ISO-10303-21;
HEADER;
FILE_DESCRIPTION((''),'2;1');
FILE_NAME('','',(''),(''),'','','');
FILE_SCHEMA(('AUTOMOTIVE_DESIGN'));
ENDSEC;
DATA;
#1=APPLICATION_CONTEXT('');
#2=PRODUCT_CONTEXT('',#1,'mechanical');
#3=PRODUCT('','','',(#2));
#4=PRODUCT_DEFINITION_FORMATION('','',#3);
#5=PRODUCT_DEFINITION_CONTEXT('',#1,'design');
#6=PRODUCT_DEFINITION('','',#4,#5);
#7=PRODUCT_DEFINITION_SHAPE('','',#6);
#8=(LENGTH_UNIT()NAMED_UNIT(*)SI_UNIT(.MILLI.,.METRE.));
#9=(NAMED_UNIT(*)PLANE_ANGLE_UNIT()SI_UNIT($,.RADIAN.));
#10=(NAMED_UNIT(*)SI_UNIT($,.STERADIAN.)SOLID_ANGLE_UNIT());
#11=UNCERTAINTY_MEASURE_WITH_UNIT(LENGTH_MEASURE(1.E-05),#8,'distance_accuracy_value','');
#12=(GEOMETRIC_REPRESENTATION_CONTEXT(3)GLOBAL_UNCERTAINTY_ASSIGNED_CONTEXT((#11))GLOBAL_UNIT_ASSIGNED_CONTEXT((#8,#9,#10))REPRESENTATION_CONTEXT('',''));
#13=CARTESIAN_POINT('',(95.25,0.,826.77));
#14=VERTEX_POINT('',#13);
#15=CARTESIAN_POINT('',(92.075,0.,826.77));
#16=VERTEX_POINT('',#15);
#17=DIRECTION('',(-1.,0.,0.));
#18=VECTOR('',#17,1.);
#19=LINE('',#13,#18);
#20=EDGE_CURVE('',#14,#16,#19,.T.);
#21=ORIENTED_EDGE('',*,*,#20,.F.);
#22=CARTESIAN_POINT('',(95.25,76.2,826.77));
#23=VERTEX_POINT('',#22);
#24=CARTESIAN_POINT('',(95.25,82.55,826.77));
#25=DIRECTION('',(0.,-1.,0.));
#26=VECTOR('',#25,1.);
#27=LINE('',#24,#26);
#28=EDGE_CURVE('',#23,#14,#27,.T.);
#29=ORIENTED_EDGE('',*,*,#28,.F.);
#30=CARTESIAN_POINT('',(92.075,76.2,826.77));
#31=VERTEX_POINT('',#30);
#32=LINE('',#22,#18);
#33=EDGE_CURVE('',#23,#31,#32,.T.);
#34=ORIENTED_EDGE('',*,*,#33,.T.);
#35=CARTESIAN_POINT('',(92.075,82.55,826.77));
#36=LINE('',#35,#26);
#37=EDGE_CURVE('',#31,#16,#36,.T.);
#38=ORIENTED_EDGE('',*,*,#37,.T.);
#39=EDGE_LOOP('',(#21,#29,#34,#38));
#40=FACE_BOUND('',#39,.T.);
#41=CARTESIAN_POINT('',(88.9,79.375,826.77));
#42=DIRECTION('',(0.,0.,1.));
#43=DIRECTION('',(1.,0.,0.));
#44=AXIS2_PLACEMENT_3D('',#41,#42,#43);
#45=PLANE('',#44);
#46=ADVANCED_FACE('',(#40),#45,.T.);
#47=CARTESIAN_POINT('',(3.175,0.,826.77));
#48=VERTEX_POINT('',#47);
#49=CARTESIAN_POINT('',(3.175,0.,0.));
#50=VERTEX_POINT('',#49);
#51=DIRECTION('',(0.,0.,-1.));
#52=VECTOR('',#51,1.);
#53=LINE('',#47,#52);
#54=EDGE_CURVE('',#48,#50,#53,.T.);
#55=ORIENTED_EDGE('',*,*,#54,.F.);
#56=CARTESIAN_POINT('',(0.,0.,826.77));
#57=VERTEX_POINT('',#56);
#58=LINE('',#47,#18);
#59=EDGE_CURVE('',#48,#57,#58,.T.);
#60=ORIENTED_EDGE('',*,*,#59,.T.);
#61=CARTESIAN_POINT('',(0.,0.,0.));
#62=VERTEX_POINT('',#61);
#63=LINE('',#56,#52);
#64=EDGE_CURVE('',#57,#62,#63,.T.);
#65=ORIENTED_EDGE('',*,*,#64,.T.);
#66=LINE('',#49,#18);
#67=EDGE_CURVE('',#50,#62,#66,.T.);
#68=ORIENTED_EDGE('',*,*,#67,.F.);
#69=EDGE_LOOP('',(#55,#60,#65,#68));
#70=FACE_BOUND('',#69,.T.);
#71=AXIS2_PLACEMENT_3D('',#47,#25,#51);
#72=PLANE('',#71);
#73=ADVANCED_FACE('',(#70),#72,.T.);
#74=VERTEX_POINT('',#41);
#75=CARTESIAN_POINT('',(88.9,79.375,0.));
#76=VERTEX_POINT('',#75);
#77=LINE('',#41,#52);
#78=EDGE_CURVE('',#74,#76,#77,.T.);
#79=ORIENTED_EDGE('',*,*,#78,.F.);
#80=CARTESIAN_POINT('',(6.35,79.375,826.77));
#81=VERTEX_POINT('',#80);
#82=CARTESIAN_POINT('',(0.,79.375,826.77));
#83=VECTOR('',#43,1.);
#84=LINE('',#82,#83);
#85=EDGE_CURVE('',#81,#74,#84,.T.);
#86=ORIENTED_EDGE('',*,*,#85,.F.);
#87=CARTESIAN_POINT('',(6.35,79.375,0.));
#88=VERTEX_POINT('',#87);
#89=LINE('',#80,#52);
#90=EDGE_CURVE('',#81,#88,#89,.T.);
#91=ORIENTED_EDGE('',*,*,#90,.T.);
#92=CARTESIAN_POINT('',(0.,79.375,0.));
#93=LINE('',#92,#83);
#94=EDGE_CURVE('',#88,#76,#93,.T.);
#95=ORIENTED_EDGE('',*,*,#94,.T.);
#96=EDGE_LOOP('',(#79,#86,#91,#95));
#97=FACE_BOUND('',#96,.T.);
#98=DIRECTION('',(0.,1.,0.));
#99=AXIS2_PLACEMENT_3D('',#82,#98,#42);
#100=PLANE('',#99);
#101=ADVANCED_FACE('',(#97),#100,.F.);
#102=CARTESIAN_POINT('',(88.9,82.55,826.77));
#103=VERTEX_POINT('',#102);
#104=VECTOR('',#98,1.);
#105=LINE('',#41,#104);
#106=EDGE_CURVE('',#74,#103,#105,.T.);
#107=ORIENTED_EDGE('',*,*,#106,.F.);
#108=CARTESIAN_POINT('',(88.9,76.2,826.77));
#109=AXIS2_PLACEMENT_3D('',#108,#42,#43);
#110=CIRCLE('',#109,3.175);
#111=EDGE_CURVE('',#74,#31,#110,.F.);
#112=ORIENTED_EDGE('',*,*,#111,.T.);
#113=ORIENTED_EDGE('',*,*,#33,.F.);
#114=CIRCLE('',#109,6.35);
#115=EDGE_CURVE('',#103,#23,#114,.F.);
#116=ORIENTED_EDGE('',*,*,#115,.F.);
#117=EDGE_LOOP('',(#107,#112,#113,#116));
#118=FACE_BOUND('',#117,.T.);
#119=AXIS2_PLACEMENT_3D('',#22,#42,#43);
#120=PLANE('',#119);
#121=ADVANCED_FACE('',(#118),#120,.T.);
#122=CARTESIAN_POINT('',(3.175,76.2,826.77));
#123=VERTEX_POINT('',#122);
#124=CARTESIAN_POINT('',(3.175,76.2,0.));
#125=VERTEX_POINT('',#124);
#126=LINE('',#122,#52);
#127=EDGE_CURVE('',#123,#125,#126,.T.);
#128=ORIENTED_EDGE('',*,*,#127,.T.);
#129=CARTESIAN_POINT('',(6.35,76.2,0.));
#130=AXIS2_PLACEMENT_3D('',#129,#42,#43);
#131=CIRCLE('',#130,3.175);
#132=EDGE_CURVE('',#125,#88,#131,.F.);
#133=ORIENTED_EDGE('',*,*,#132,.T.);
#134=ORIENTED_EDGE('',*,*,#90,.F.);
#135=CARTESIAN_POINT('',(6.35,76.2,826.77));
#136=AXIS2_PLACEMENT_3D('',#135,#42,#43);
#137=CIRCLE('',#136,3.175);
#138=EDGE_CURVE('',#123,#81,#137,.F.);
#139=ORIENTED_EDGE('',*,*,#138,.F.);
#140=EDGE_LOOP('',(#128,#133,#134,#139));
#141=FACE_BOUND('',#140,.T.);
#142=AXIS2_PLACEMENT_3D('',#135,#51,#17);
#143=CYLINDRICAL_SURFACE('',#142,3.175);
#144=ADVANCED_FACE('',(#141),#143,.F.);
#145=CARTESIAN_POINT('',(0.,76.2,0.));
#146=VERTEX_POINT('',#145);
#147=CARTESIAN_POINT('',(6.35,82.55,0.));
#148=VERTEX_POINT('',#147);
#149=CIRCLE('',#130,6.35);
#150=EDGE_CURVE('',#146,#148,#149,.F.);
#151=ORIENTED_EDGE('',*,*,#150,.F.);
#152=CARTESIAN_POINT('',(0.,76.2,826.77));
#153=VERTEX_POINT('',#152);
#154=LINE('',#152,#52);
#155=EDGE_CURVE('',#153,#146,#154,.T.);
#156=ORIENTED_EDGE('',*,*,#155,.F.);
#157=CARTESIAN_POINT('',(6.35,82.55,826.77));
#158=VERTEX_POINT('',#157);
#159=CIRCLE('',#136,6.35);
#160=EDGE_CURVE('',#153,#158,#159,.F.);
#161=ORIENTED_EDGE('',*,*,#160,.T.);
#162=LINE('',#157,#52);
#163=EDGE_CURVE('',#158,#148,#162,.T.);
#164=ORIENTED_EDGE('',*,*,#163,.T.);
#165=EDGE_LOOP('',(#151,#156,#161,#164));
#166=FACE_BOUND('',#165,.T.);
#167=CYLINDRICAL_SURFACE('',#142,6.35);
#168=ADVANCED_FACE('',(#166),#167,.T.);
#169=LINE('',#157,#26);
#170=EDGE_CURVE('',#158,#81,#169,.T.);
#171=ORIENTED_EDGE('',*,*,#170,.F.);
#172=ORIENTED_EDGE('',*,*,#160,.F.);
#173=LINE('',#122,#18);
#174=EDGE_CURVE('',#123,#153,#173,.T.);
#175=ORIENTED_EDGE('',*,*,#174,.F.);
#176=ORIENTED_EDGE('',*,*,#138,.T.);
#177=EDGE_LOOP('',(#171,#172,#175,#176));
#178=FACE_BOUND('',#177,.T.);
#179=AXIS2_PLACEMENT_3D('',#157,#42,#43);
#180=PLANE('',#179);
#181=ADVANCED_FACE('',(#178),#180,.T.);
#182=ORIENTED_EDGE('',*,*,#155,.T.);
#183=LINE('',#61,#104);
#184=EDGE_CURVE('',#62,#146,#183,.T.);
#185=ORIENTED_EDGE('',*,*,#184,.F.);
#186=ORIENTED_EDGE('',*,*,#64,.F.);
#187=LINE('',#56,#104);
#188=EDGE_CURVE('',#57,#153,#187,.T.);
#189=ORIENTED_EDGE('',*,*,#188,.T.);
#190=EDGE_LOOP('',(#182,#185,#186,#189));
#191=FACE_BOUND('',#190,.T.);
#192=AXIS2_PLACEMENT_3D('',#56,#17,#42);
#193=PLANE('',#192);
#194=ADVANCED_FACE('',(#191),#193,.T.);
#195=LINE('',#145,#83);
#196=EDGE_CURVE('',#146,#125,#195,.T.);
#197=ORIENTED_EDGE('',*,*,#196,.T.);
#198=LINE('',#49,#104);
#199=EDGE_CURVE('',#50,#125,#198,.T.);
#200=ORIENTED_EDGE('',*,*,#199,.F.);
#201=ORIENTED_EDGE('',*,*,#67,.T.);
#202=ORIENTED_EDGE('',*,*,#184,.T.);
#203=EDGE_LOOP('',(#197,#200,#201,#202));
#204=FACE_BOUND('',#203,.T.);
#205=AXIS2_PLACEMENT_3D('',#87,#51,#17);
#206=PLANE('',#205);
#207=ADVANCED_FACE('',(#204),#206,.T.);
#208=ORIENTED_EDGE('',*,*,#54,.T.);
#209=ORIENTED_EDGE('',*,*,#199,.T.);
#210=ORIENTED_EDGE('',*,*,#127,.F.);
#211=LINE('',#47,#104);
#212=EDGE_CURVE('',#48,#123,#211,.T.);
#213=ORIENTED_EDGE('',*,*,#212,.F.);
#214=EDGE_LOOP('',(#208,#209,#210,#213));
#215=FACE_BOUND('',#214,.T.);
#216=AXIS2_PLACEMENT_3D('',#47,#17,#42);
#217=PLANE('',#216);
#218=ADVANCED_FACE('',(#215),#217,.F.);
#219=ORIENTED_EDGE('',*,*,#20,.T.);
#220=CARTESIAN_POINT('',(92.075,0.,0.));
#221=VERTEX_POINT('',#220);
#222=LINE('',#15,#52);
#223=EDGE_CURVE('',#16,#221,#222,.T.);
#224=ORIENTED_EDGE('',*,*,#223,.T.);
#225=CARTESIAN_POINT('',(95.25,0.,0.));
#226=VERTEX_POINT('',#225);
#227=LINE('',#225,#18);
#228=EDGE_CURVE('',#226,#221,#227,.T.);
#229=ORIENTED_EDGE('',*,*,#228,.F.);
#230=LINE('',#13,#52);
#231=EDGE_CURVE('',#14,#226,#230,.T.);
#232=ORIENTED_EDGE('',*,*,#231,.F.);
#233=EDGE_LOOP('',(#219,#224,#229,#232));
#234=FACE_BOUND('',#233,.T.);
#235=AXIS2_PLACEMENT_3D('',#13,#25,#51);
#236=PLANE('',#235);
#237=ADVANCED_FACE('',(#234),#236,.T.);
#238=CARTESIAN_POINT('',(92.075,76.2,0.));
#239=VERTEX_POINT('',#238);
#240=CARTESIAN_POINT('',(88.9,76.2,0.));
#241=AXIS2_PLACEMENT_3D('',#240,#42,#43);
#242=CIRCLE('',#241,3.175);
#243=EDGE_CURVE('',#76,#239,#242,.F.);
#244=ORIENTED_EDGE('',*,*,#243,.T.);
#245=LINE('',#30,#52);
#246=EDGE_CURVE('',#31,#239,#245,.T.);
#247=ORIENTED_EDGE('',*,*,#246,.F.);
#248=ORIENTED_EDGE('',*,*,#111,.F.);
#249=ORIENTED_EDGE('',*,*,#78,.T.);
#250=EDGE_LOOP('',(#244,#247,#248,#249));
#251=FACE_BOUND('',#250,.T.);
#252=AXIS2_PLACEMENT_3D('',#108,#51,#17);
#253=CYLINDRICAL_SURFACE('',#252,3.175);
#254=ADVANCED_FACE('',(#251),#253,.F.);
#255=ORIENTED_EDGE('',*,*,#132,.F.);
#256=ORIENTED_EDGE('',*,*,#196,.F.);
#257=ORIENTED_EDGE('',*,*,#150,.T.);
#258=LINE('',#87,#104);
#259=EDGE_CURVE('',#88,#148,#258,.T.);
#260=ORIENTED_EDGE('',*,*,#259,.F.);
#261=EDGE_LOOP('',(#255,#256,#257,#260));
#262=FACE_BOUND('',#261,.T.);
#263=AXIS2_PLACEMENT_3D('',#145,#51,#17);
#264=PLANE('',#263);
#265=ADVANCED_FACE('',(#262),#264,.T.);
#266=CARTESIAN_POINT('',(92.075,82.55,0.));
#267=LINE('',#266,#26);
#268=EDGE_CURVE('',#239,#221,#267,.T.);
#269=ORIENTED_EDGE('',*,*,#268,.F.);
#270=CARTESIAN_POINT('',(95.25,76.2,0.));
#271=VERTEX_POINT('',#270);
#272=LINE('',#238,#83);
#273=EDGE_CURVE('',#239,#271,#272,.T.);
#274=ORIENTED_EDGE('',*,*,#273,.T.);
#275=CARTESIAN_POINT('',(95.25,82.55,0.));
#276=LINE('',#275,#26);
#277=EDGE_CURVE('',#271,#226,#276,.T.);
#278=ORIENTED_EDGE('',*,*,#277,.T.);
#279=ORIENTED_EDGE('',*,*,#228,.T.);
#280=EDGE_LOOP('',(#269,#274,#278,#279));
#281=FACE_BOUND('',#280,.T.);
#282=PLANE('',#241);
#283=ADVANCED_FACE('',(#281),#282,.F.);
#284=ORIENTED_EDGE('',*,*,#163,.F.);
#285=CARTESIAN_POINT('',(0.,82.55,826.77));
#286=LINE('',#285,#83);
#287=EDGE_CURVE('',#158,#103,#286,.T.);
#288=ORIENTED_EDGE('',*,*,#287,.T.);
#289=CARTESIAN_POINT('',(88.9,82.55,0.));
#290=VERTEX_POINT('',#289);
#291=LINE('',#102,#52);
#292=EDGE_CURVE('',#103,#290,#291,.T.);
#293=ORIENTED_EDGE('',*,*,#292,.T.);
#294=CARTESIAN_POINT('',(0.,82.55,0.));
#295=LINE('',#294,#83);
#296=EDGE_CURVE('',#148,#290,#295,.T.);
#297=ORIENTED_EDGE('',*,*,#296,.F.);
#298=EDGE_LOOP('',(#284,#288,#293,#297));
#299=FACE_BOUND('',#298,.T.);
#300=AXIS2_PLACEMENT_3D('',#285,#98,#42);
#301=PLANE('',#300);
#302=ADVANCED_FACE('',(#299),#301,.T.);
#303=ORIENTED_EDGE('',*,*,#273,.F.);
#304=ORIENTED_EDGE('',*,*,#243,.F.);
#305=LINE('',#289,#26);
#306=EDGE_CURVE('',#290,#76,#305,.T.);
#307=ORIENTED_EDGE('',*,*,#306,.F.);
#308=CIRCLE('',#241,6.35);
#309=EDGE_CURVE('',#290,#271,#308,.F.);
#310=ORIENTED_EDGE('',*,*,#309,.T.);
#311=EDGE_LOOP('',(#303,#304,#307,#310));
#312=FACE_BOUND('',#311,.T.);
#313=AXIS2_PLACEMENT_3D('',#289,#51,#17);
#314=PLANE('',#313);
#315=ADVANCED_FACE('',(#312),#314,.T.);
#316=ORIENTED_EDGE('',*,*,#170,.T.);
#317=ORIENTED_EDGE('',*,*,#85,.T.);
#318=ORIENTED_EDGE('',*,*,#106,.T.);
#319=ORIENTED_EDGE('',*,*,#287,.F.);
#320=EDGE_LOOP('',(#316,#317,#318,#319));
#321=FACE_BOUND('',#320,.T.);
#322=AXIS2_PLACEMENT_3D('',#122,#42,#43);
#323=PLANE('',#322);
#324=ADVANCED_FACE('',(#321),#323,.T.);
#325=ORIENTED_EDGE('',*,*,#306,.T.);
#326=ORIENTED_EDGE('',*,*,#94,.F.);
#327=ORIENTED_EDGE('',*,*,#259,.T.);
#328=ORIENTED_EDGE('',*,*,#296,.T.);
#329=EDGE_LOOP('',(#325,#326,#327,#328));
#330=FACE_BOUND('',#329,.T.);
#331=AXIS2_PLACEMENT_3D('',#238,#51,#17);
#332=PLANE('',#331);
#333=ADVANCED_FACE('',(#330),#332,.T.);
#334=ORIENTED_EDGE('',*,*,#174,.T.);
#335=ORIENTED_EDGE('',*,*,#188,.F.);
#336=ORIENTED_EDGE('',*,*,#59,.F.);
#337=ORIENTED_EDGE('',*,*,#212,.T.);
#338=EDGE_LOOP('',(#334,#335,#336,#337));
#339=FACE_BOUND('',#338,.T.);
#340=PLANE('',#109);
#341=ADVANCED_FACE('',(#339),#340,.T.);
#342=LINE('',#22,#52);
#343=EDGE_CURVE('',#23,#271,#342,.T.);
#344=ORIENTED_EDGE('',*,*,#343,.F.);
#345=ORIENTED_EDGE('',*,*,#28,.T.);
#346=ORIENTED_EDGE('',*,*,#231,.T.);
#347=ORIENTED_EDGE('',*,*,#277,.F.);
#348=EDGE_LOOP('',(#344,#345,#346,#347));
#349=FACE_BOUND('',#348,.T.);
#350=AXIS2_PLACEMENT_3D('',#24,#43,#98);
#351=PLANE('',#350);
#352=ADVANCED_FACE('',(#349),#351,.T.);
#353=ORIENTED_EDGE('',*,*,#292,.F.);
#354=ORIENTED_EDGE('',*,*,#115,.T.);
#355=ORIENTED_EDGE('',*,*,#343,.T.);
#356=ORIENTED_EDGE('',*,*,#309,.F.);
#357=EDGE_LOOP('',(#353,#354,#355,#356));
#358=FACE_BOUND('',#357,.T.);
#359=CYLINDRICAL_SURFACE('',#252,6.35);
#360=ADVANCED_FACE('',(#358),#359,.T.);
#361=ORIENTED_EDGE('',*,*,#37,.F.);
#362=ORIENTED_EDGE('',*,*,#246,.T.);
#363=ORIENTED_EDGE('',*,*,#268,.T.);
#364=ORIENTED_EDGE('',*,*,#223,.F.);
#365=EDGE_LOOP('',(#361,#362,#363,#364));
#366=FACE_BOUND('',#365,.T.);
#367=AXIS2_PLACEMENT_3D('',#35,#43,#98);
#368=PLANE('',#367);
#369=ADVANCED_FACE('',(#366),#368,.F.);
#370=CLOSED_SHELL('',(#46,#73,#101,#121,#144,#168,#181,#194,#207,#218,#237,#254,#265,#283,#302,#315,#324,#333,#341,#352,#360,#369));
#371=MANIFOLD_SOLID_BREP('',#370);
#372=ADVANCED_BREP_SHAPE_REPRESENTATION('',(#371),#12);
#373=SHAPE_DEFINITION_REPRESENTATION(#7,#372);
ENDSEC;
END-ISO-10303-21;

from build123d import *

# Parameters (mm, degrees)
BASE_FLANGE1_DEPTH = 826.77


# Sheet-metal steps are written as plain solids
with BuildPart() as part:
    # Sketch1 → Base-Flange1 (new body)
    with BuildSketch(Plane.XY):
        with BuildLine():
            Line((0, 0), (0, 76.2))
            ThreePointArc((0, 76.2), (1.859871939, 80.690128061), (6.35, 82.55))
            Line((6.35, 82.55), (88.9, 82.55))
            ThreePointArc((88.9, 82.55), (93.390128061, 80.690128061), (95.25, 76.2))
            Line((95.25, 76.2), (95.25, 0))
            Line((95.25, 0), (92.075, 0))
            Line((92.075, 0), (92.075, 76.2))
            ThreePointArc((92.075, 76.2), (91.14506403, 78.44506403), (88.9, 79.375))
            Line((88.9, 79.375), (6.35, 79.375))
            ThreePointArc((6.35, 79.375), (4.10493597, 78.44506403), (3.175, 76.2))
            Line((3.175, 76.2), (3.175, 0))
            Line((3.175, 0), (0, 0))
        make_face()
    extrude(amount=BASE_FLANGE1_DEPTH)


solid = part.part
